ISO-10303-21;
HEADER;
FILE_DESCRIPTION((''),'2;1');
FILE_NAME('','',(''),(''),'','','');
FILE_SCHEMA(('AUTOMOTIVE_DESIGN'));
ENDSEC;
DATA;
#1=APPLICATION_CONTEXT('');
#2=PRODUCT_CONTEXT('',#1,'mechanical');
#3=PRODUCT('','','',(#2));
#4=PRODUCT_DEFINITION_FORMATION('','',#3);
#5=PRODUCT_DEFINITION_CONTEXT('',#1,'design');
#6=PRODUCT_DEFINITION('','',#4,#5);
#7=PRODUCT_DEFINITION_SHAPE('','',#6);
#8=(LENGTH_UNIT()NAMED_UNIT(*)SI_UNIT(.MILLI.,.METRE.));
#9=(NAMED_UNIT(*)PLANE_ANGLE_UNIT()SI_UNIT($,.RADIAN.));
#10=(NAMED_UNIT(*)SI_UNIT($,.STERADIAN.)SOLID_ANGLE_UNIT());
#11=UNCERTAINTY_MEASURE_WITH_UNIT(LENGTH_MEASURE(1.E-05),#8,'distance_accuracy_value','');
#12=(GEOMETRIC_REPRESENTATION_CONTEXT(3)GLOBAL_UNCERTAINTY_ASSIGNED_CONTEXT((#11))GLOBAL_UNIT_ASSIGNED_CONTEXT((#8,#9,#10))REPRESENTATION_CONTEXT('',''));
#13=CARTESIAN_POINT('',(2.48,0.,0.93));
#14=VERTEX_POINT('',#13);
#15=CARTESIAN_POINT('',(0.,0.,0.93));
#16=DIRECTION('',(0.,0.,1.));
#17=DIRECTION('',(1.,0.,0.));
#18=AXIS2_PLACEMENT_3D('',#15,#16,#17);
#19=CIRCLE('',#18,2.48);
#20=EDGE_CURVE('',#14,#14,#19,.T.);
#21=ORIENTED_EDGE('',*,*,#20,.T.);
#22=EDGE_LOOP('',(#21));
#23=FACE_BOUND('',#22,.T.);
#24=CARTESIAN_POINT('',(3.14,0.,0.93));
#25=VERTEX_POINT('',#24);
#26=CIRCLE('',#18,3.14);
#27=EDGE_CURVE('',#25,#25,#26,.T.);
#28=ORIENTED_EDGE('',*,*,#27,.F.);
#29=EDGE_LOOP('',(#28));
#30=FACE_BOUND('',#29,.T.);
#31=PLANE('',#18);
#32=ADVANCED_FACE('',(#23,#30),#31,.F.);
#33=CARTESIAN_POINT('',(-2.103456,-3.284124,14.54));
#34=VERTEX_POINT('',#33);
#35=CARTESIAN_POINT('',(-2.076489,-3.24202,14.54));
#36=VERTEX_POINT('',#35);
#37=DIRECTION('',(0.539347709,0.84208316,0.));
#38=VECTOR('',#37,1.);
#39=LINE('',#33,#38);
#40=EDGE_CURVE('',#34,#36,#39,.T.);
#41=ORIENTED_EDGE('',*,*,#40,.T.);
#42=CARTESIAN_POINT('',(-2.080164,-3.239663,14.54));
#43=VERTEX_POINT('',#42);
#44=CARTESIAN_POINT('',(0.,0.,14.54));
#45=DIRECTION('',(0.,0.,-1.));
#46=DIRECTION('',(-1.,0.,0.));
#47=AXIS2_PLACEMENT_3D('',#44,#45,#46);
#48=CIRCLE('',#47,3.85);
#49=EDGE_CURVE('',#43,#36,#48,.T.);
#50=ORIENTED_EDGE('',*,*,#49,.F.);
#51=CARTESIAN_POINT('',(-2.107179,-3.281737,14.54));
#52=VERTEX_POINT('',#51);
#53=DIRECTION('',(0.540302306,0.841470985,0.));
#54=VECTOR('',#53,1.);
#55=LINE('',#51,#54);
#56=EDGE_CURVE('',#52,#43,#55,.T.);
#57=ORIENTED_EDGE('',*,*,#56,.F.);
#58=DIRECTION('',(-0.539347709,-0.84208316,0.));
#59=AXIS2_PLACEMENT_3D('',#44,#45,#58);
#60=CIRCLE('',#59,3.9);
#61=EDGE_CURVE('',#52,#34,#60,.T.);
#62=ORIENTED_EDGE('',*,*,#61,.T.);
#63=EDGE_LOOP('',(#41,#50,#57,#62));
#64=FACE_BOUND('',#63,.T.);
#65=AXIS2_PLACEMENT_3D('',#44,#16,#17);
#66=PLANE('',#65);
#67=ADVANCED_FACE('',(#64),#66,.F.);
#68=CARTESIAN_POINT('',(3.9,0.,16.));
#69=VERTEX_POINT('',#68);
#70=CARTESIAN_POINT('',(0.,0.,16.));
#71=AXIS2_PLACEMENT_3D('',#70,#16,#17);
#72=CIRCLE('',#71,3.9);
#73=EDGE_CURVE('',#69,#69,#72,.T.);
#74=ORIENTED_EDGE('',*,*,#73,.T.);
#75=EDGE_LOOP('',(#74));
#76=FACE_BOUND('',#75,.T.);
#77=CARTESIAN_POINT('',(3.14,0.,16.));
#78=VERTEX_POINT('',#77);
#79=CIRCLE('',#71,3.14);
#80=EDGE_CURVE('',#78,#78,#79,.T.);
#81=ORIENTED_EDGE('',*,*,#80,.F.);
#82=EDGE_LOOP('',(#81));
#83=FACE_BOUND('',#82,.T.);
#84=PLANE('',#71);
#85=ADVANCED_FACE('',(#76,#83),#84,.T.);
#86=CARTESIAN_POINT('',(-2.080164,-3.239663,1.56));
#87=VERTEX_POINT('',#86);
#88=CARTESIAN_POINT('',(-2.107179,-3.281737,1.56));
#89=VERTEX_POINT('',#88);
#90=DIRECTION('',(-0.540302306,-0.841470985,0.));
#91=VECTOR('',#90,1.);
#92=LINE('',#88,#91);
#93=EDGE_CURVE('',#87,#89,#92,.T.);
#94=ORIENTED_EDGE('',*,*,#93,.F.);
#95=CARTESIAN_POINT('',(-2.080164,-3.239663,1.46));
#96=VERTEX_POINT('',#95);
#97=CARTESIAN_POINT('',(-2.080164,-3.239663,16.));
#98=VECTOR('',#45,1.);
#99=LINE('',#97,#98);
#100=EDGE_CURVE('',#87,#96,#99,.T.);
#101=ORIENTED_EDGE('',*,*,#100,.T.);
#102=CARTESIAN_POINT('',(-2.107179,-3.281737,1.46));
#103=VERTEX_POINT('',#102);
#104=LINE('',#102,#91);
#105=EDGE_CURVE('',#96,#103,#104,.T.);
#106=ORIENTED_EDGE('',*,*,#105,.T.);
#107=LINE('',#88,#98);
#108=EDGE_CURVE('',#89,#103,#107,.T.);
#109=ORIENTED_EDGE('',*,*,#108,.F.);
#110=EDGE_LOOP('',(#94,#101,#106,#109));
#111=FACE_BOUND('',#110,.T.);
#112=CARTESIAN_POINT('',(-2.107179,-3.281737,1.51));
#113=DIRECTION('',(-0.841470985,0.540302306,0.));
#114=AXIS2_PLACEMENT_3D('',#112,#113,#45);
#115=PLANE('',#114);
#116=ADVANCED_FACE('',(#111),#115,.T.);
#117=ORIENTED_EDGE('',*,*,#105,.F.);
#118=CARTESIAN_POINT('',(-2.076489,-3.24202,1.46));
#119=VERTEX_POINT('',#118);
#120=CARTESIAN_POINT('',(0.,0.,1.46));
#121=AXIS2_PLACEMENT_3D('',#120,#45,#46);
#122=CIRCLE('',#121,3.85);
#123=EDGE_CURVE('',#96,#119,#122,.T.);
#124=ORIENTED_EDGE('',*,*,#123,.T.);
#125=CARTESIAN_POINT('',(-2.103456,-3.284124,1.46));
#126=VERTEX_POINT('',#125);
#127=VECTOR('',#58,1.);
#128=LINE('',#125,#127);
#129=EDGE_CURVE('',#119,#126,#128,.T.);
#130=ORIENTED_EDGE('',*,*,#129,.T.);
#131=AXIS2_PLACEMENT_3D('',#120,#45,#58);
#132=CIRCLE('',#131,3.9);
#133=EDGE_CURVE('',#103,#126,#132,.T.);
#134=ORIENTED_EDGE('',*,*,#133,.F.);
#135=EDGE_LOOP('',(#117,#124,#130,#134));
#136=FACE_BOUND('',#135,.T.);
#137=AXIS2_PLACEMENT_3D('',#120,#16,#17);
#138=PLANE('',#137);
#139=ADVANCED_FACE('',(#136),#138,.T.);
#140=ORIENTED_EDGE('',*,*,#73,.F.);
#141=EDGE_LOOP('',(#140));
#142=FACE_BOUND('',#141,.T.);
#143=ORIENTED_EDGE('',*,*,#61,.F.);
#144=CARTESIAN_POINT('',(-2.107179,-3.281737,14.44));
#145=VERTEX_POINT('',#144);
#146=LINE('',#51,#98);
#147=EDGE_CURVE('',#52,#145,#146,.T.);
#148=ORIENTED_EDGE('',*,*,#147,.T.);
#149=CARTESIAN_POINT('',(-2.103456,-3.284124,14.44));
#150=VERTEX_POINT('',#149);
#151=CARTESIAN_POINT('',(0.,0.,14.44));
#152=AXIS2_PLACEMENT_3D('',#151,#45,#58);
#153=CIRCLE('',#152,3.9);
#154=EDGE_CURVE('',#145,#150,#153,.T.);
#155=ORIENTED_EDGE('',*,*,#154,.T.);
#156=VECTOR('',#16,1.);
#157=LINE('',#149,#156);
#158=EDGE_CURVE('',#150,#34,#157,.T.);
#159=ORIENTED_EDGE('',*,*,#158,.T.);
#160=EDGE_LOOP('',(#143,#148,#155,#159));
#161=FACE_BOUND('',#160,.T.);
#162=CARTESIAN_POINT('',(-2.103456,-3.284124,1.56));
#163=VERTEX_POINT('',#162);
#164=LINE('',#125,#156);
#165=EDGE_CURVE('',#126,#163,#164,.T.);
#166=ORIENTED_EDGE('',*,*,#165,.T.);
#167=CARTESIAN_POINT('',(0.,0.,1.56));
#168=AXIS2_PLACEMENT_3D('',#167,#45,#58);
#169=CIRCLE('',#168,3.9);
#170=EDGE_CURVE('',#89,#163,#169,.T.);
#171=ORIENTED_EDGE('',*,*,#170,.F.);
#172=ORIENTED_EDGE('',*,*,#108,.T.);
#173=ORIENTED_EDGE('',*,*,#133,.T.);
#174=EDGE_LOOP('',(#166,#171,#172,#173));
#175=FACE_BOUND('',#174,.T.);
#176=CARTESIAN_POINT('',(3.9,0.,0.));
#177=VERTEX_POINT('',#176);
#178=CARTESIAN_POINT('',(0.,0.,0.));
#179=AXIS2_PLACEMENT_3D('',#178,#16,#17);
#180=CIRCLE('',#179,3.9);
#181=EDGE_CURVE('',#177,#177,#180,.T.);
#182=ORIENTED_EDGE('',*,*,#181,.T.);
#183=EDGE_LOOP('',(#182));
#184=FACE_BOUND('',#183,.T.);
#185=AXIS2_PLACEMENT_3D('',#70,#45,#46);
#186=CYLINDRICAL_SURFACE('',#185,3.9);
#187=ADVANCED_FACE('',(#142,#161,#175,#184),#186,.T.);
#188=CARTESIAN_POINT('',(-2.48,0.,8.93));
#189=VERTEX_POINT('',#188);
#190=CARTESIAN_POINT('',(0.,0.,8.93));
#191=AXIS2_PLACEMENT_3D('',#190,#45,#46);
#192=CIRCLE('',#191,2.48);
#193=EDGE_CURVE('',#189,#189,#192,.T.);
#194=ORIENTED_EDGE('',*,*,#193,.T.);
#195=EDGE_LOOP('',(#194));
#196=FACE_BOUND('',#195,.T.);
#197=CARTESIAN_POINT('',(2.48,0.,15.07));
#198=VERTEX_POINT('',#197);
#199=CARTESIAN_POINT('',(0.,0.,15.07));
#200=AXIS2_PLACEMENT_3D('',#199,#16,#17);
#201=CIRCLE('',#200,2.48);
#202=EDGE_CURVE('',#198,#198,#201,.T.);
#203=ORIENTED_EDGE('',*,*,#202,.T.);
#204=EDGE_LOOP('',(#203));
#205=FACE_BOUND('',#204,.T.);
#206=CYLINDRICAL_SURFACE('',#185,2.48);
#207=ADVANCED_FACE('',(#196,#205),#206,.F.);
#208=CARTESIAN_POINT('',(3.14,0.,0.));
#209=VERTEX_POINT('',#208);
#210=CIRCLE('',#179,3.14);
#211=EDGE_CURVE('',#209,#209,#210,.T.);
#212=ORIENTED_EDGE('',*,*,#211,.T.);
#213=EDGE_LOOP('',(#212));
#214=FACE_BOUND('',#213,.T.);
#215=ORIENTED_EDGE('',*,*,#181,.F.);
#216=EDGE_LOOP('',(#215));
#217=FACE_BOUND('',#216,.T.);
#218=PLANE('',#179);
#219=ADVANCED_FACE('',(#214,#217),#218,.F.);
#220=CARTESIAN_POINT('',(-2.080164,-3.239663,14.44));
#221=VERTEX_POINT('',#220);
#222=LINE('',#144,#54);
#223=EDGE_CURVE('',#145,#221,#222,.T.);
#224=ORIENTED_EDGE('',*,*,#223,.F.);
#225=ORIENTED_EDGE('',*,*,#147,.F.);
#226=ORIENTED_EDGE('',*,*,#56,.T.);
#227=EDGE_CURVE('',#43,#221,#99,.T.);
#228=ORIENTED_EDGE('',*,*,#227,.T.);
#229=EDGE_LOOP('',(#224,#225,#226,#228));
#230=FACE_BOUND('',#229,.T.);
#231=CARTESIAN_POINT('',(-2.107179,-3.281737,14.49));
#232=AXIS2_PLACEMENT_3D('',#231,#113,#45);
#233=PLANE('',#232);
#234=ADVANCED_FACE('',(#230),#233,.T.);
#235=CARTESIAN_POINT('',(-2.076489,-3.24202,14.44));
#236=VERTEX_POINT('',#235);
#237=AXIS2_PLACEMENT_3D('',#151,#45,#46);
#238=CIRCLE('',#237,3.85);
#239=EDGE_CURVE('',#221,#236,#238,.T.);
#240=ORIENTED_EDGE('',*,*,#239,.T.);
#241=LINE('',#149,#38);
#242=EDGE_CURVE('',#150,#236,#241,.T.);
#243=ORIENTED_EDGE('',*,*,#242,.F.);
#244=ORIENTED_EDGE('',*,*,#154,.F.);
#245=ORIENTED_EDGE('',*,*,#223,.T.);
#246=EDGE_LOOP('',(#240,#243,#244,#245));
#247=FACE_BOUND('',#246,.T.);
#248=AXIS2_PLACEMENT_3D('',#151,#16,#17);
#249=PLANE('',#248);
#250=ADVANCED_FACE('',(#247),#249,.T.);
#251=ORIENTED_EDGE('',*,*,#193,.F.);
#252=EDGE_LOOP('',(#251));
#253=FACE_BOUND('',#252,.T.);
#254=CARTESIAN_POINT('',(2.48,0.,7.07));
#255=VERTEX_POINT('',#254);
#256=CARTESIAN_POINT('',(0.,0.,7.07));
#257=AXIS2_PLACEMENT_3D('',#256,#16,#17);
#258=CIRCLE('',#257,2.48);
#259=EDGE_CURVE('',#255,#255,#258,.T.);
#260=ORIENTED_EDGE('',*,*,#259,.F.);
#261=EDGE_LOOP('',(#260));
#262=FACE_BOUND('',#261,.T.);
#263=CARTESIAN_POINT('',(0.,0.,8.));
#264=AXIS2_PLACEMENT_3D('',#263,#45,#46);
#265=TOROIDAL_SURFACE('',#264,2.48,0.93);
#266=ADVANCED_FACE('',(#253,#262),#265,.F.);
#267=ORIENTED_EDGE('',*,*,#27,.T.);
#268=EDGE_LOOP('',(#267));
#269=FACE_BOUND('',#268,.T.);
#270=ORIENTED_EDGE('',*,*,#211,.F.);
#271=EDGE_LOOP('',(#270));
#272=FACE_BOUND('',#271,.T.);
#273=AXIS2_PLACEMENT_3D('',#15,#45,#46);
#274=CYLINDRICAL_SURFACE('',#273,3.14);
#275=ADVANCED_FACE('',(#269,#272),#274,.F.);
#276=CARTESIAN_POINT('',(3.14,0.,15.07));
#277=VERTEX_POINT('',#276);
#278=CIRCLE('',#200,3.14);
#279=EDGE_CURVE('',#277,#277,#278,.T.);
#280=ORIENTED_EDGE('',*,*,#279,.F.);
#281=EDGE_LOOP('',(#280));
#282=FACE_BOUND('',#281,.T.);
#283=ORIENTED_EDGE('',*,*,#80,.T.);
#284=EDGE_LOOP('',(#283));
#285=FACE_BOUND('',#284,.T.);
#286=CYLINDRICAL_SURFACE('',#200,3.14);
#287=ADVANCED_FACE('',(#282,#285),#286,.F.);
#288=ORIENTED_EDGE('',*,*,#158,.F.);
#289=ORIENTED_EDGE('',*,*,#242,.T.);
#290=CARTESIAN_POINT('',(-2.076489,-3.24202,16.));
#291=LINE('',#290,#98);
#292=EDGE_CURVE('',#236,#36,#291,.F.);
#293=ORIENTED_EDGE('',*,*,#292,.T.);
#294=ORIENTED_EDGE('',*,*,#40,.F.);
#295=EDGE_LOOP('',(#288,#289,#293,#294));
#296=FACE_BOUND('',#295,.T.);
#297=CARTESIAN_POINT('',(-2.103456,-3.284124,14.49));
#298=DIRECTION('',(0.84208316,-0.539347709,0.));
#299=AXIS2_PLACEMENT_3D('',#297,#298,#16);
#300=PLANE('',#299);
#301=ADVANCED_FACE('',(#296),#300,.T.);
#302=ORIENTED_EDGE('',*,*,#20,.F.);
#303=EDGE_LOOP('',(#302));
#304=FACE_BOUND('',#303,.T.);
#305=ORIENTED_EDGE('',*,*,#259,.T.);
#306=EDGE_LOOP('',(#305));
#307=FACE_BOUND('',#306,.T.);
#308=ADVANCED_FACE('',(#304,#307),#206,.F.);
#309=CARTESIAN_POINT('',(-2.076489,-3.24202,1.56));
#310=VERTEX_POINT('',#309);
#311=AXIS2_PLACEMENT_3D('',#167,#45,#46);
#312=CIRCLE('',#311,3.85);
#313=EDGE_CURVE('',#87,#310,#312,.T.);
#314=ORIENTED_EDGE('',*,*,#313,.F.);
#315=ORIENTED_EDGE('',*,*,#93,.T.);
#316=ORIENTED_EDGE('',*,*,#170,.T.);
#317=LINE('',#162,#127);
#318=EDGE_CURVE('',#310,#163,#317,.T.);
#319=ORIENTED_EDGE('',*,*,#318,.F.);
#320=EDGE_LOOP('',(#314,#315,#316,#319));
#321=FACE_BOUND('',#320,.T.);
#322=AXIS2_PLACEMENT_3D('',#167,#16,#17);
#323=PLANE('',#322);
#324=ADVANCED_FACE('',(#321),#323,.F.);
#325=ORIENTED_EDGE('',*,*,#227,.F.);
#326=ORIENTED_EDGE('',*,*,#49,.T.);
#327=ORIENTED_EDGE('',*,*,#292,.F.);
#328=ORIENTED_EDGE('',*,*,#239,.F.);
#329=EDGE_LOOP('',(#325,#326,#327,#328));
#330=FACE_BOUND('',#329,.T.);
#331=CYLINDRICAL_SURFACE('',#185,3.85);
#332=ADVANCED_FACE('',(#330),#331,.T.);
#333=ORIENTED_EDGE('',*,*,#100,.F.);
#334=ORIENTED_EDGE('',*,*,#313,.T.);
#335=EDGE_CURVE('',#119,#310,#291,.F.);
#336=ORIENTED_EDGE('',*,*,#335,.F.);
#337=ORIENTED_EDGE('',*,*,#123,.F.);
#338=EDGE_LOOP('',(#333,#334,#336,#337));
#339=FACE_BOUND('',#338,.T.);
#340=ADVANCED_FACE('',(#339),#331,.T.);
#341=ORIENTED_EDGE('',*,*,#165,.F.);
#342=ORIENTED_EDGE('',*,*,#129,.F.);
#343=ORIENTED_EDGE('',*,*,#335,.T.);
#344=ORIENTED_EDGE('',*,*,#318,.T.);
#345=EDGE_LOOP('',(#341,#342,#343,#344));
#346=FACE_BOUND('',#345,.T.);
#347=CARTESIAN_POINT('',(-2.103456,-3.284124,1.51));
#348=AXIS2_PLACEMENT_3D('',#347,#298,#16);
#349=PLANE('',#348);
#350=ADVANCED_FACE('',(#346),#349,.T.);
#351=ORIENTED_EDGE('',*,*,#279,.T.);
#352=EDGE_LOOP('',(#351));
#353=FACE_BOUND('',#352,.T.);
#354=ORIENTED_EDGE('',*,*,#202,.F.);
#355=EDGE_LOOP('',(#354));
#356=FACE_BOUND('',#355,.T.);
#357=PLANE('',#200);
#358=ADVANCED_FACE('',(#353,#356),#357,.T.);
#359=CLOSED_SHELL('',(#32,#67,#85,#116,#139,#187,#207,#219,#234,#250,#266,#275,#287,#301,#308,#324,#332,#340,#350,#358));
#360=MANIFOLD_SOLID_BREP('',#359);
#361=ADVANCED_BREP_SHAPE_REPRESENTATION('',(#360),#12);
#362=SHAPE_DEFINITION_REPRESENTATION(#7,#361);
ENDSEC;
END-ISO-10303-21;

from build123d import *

# Parameters (mm, degrees)
SKETCH1_R           = 3.9
SKETCH1_R_2         = 2.48
BOSS_EXTRUDE1_DEPTH = 16
CUT_EXTRUDE1_START  = -0.93
SKETCH2_R           = 3.14
SKETCH2_R_2         = 2.48
CUT_EXTRUDE1_DEPTH  = 0.93
SKETCH3_R           = 3.14
SKETCH3_R_2         = 2.48
CUT_EXTRUDE3_DEPTH  = 0.93
SKETCH4_R           = 0.93
WRAP1_START         = 1.46
WRAP1_DEPTH         = 0.1
WRAP1_START_2       = 14.44
WRAP1_2_DEPTH       = 0.1


# Read off the part's stored shape, not the designer's step: Wrap1
with BuildPart() as part:
    # Sketch1 → Boss-Extrude1 (new body)
    with BuildSketch(Plane.XY):
        Circle(SKETCH1_R)
        Circle(SKETCH1_R_2, mode=Mode.SUBTRACT)
    extrude(amount=BOSS_EXTRUDE1_DEPTH)

    # Sketch2 → Cut-Extrude1 (cut)
    with BuildSketch(Plane.XY.offset(16).offset(CUT_EXTRUDE1_START)):
        Circle(SKETCH2_R)
        Circle(SKETCH2_R_2, mode=Mode.SUBTRACT)
    extrude(amount=CUT_EXTRUDE1_DEPTH, mode=Mode.SUBTRACT)

    # Sketch3 → Cut-Extrude3 (cut)
    with BuildSketch(Plane.XY):
        Circle(SKETCH3_R)
        Circle(SKETCH3_R_2, mode=Mode.SUBTRACT)
    extrude(amount=CUT_EXTRUDE3_DEPTH, mode=Mode.SUBTRACT)

    # Sketch4 → Cut-Revolve1 (revolve, cut)
    with BuildSketch(Plane(origin=(0, 0, 0), x_dir=(1, 0, 0), z_dir=(0, 1, 0)), mode=Mode.PRIVATE) as cut_revolve1_sk:
        with Locations((2.48, -8)):
            Circle(SKETCH4_R)
    revolve(cut_revolve1_sk.sketch.rotate(Axis((0, 0, 0.93), (0, 0, 1)), 180), axis=Axis((0, 0, 0.93), (0, 0, 1)), mode=Mode.SUBTRACT)

    # Wrap1 outline → Wrap1 (cut)
    with BuildSketch(Plane.XY.offset(WRAP1_START)):
        with BuildLine():
            Line((-2.107178993, -3.281736841), (-2.080163878, -3.239663292))
            ThreePointArc((-2.080163878, -3.239663292), (2.078325496, 3.240842967), (-2.076488681, -3.242020166))
            Line((-2.076488681, -3.242020166), (-2.103456067, -3.284124324))
            ThreePointArc((-2.103456067, -3.284124324), (2.105317868, 3.28293111), (-2.107178993, -3.281736841))
        make_face()
    extrude(amount=WRAP1_DEPTH, mode=Mode.SUBTRACT)

    # Wrap1 2 outline → Wrap1 2 (cut)
    with BuildSketch(Plane.XY.offset(WRAP1_START_2)):
        with BuildLine():
            Line((-2.107178993, -3.281736841), (-2.080163878, -3.239663292))
            ThreePointArc((-2.080163878, -3.239663292), (2.078325496, 3.240842967), (-2.076488681, -3.242020166))
            Line((-2.076488681, -3.242020166), (-2.103456067, -3.284124324))
            ThreePointArc((-2.103456067, -3.284124324), (2.105317868, 3.28293111), (-2.107178993, -3.281736841))
        make_face()
    extrude(amount=WRAP1_2_DEPTH, mode=Mode.SUBTRACT)


solid = part.part
